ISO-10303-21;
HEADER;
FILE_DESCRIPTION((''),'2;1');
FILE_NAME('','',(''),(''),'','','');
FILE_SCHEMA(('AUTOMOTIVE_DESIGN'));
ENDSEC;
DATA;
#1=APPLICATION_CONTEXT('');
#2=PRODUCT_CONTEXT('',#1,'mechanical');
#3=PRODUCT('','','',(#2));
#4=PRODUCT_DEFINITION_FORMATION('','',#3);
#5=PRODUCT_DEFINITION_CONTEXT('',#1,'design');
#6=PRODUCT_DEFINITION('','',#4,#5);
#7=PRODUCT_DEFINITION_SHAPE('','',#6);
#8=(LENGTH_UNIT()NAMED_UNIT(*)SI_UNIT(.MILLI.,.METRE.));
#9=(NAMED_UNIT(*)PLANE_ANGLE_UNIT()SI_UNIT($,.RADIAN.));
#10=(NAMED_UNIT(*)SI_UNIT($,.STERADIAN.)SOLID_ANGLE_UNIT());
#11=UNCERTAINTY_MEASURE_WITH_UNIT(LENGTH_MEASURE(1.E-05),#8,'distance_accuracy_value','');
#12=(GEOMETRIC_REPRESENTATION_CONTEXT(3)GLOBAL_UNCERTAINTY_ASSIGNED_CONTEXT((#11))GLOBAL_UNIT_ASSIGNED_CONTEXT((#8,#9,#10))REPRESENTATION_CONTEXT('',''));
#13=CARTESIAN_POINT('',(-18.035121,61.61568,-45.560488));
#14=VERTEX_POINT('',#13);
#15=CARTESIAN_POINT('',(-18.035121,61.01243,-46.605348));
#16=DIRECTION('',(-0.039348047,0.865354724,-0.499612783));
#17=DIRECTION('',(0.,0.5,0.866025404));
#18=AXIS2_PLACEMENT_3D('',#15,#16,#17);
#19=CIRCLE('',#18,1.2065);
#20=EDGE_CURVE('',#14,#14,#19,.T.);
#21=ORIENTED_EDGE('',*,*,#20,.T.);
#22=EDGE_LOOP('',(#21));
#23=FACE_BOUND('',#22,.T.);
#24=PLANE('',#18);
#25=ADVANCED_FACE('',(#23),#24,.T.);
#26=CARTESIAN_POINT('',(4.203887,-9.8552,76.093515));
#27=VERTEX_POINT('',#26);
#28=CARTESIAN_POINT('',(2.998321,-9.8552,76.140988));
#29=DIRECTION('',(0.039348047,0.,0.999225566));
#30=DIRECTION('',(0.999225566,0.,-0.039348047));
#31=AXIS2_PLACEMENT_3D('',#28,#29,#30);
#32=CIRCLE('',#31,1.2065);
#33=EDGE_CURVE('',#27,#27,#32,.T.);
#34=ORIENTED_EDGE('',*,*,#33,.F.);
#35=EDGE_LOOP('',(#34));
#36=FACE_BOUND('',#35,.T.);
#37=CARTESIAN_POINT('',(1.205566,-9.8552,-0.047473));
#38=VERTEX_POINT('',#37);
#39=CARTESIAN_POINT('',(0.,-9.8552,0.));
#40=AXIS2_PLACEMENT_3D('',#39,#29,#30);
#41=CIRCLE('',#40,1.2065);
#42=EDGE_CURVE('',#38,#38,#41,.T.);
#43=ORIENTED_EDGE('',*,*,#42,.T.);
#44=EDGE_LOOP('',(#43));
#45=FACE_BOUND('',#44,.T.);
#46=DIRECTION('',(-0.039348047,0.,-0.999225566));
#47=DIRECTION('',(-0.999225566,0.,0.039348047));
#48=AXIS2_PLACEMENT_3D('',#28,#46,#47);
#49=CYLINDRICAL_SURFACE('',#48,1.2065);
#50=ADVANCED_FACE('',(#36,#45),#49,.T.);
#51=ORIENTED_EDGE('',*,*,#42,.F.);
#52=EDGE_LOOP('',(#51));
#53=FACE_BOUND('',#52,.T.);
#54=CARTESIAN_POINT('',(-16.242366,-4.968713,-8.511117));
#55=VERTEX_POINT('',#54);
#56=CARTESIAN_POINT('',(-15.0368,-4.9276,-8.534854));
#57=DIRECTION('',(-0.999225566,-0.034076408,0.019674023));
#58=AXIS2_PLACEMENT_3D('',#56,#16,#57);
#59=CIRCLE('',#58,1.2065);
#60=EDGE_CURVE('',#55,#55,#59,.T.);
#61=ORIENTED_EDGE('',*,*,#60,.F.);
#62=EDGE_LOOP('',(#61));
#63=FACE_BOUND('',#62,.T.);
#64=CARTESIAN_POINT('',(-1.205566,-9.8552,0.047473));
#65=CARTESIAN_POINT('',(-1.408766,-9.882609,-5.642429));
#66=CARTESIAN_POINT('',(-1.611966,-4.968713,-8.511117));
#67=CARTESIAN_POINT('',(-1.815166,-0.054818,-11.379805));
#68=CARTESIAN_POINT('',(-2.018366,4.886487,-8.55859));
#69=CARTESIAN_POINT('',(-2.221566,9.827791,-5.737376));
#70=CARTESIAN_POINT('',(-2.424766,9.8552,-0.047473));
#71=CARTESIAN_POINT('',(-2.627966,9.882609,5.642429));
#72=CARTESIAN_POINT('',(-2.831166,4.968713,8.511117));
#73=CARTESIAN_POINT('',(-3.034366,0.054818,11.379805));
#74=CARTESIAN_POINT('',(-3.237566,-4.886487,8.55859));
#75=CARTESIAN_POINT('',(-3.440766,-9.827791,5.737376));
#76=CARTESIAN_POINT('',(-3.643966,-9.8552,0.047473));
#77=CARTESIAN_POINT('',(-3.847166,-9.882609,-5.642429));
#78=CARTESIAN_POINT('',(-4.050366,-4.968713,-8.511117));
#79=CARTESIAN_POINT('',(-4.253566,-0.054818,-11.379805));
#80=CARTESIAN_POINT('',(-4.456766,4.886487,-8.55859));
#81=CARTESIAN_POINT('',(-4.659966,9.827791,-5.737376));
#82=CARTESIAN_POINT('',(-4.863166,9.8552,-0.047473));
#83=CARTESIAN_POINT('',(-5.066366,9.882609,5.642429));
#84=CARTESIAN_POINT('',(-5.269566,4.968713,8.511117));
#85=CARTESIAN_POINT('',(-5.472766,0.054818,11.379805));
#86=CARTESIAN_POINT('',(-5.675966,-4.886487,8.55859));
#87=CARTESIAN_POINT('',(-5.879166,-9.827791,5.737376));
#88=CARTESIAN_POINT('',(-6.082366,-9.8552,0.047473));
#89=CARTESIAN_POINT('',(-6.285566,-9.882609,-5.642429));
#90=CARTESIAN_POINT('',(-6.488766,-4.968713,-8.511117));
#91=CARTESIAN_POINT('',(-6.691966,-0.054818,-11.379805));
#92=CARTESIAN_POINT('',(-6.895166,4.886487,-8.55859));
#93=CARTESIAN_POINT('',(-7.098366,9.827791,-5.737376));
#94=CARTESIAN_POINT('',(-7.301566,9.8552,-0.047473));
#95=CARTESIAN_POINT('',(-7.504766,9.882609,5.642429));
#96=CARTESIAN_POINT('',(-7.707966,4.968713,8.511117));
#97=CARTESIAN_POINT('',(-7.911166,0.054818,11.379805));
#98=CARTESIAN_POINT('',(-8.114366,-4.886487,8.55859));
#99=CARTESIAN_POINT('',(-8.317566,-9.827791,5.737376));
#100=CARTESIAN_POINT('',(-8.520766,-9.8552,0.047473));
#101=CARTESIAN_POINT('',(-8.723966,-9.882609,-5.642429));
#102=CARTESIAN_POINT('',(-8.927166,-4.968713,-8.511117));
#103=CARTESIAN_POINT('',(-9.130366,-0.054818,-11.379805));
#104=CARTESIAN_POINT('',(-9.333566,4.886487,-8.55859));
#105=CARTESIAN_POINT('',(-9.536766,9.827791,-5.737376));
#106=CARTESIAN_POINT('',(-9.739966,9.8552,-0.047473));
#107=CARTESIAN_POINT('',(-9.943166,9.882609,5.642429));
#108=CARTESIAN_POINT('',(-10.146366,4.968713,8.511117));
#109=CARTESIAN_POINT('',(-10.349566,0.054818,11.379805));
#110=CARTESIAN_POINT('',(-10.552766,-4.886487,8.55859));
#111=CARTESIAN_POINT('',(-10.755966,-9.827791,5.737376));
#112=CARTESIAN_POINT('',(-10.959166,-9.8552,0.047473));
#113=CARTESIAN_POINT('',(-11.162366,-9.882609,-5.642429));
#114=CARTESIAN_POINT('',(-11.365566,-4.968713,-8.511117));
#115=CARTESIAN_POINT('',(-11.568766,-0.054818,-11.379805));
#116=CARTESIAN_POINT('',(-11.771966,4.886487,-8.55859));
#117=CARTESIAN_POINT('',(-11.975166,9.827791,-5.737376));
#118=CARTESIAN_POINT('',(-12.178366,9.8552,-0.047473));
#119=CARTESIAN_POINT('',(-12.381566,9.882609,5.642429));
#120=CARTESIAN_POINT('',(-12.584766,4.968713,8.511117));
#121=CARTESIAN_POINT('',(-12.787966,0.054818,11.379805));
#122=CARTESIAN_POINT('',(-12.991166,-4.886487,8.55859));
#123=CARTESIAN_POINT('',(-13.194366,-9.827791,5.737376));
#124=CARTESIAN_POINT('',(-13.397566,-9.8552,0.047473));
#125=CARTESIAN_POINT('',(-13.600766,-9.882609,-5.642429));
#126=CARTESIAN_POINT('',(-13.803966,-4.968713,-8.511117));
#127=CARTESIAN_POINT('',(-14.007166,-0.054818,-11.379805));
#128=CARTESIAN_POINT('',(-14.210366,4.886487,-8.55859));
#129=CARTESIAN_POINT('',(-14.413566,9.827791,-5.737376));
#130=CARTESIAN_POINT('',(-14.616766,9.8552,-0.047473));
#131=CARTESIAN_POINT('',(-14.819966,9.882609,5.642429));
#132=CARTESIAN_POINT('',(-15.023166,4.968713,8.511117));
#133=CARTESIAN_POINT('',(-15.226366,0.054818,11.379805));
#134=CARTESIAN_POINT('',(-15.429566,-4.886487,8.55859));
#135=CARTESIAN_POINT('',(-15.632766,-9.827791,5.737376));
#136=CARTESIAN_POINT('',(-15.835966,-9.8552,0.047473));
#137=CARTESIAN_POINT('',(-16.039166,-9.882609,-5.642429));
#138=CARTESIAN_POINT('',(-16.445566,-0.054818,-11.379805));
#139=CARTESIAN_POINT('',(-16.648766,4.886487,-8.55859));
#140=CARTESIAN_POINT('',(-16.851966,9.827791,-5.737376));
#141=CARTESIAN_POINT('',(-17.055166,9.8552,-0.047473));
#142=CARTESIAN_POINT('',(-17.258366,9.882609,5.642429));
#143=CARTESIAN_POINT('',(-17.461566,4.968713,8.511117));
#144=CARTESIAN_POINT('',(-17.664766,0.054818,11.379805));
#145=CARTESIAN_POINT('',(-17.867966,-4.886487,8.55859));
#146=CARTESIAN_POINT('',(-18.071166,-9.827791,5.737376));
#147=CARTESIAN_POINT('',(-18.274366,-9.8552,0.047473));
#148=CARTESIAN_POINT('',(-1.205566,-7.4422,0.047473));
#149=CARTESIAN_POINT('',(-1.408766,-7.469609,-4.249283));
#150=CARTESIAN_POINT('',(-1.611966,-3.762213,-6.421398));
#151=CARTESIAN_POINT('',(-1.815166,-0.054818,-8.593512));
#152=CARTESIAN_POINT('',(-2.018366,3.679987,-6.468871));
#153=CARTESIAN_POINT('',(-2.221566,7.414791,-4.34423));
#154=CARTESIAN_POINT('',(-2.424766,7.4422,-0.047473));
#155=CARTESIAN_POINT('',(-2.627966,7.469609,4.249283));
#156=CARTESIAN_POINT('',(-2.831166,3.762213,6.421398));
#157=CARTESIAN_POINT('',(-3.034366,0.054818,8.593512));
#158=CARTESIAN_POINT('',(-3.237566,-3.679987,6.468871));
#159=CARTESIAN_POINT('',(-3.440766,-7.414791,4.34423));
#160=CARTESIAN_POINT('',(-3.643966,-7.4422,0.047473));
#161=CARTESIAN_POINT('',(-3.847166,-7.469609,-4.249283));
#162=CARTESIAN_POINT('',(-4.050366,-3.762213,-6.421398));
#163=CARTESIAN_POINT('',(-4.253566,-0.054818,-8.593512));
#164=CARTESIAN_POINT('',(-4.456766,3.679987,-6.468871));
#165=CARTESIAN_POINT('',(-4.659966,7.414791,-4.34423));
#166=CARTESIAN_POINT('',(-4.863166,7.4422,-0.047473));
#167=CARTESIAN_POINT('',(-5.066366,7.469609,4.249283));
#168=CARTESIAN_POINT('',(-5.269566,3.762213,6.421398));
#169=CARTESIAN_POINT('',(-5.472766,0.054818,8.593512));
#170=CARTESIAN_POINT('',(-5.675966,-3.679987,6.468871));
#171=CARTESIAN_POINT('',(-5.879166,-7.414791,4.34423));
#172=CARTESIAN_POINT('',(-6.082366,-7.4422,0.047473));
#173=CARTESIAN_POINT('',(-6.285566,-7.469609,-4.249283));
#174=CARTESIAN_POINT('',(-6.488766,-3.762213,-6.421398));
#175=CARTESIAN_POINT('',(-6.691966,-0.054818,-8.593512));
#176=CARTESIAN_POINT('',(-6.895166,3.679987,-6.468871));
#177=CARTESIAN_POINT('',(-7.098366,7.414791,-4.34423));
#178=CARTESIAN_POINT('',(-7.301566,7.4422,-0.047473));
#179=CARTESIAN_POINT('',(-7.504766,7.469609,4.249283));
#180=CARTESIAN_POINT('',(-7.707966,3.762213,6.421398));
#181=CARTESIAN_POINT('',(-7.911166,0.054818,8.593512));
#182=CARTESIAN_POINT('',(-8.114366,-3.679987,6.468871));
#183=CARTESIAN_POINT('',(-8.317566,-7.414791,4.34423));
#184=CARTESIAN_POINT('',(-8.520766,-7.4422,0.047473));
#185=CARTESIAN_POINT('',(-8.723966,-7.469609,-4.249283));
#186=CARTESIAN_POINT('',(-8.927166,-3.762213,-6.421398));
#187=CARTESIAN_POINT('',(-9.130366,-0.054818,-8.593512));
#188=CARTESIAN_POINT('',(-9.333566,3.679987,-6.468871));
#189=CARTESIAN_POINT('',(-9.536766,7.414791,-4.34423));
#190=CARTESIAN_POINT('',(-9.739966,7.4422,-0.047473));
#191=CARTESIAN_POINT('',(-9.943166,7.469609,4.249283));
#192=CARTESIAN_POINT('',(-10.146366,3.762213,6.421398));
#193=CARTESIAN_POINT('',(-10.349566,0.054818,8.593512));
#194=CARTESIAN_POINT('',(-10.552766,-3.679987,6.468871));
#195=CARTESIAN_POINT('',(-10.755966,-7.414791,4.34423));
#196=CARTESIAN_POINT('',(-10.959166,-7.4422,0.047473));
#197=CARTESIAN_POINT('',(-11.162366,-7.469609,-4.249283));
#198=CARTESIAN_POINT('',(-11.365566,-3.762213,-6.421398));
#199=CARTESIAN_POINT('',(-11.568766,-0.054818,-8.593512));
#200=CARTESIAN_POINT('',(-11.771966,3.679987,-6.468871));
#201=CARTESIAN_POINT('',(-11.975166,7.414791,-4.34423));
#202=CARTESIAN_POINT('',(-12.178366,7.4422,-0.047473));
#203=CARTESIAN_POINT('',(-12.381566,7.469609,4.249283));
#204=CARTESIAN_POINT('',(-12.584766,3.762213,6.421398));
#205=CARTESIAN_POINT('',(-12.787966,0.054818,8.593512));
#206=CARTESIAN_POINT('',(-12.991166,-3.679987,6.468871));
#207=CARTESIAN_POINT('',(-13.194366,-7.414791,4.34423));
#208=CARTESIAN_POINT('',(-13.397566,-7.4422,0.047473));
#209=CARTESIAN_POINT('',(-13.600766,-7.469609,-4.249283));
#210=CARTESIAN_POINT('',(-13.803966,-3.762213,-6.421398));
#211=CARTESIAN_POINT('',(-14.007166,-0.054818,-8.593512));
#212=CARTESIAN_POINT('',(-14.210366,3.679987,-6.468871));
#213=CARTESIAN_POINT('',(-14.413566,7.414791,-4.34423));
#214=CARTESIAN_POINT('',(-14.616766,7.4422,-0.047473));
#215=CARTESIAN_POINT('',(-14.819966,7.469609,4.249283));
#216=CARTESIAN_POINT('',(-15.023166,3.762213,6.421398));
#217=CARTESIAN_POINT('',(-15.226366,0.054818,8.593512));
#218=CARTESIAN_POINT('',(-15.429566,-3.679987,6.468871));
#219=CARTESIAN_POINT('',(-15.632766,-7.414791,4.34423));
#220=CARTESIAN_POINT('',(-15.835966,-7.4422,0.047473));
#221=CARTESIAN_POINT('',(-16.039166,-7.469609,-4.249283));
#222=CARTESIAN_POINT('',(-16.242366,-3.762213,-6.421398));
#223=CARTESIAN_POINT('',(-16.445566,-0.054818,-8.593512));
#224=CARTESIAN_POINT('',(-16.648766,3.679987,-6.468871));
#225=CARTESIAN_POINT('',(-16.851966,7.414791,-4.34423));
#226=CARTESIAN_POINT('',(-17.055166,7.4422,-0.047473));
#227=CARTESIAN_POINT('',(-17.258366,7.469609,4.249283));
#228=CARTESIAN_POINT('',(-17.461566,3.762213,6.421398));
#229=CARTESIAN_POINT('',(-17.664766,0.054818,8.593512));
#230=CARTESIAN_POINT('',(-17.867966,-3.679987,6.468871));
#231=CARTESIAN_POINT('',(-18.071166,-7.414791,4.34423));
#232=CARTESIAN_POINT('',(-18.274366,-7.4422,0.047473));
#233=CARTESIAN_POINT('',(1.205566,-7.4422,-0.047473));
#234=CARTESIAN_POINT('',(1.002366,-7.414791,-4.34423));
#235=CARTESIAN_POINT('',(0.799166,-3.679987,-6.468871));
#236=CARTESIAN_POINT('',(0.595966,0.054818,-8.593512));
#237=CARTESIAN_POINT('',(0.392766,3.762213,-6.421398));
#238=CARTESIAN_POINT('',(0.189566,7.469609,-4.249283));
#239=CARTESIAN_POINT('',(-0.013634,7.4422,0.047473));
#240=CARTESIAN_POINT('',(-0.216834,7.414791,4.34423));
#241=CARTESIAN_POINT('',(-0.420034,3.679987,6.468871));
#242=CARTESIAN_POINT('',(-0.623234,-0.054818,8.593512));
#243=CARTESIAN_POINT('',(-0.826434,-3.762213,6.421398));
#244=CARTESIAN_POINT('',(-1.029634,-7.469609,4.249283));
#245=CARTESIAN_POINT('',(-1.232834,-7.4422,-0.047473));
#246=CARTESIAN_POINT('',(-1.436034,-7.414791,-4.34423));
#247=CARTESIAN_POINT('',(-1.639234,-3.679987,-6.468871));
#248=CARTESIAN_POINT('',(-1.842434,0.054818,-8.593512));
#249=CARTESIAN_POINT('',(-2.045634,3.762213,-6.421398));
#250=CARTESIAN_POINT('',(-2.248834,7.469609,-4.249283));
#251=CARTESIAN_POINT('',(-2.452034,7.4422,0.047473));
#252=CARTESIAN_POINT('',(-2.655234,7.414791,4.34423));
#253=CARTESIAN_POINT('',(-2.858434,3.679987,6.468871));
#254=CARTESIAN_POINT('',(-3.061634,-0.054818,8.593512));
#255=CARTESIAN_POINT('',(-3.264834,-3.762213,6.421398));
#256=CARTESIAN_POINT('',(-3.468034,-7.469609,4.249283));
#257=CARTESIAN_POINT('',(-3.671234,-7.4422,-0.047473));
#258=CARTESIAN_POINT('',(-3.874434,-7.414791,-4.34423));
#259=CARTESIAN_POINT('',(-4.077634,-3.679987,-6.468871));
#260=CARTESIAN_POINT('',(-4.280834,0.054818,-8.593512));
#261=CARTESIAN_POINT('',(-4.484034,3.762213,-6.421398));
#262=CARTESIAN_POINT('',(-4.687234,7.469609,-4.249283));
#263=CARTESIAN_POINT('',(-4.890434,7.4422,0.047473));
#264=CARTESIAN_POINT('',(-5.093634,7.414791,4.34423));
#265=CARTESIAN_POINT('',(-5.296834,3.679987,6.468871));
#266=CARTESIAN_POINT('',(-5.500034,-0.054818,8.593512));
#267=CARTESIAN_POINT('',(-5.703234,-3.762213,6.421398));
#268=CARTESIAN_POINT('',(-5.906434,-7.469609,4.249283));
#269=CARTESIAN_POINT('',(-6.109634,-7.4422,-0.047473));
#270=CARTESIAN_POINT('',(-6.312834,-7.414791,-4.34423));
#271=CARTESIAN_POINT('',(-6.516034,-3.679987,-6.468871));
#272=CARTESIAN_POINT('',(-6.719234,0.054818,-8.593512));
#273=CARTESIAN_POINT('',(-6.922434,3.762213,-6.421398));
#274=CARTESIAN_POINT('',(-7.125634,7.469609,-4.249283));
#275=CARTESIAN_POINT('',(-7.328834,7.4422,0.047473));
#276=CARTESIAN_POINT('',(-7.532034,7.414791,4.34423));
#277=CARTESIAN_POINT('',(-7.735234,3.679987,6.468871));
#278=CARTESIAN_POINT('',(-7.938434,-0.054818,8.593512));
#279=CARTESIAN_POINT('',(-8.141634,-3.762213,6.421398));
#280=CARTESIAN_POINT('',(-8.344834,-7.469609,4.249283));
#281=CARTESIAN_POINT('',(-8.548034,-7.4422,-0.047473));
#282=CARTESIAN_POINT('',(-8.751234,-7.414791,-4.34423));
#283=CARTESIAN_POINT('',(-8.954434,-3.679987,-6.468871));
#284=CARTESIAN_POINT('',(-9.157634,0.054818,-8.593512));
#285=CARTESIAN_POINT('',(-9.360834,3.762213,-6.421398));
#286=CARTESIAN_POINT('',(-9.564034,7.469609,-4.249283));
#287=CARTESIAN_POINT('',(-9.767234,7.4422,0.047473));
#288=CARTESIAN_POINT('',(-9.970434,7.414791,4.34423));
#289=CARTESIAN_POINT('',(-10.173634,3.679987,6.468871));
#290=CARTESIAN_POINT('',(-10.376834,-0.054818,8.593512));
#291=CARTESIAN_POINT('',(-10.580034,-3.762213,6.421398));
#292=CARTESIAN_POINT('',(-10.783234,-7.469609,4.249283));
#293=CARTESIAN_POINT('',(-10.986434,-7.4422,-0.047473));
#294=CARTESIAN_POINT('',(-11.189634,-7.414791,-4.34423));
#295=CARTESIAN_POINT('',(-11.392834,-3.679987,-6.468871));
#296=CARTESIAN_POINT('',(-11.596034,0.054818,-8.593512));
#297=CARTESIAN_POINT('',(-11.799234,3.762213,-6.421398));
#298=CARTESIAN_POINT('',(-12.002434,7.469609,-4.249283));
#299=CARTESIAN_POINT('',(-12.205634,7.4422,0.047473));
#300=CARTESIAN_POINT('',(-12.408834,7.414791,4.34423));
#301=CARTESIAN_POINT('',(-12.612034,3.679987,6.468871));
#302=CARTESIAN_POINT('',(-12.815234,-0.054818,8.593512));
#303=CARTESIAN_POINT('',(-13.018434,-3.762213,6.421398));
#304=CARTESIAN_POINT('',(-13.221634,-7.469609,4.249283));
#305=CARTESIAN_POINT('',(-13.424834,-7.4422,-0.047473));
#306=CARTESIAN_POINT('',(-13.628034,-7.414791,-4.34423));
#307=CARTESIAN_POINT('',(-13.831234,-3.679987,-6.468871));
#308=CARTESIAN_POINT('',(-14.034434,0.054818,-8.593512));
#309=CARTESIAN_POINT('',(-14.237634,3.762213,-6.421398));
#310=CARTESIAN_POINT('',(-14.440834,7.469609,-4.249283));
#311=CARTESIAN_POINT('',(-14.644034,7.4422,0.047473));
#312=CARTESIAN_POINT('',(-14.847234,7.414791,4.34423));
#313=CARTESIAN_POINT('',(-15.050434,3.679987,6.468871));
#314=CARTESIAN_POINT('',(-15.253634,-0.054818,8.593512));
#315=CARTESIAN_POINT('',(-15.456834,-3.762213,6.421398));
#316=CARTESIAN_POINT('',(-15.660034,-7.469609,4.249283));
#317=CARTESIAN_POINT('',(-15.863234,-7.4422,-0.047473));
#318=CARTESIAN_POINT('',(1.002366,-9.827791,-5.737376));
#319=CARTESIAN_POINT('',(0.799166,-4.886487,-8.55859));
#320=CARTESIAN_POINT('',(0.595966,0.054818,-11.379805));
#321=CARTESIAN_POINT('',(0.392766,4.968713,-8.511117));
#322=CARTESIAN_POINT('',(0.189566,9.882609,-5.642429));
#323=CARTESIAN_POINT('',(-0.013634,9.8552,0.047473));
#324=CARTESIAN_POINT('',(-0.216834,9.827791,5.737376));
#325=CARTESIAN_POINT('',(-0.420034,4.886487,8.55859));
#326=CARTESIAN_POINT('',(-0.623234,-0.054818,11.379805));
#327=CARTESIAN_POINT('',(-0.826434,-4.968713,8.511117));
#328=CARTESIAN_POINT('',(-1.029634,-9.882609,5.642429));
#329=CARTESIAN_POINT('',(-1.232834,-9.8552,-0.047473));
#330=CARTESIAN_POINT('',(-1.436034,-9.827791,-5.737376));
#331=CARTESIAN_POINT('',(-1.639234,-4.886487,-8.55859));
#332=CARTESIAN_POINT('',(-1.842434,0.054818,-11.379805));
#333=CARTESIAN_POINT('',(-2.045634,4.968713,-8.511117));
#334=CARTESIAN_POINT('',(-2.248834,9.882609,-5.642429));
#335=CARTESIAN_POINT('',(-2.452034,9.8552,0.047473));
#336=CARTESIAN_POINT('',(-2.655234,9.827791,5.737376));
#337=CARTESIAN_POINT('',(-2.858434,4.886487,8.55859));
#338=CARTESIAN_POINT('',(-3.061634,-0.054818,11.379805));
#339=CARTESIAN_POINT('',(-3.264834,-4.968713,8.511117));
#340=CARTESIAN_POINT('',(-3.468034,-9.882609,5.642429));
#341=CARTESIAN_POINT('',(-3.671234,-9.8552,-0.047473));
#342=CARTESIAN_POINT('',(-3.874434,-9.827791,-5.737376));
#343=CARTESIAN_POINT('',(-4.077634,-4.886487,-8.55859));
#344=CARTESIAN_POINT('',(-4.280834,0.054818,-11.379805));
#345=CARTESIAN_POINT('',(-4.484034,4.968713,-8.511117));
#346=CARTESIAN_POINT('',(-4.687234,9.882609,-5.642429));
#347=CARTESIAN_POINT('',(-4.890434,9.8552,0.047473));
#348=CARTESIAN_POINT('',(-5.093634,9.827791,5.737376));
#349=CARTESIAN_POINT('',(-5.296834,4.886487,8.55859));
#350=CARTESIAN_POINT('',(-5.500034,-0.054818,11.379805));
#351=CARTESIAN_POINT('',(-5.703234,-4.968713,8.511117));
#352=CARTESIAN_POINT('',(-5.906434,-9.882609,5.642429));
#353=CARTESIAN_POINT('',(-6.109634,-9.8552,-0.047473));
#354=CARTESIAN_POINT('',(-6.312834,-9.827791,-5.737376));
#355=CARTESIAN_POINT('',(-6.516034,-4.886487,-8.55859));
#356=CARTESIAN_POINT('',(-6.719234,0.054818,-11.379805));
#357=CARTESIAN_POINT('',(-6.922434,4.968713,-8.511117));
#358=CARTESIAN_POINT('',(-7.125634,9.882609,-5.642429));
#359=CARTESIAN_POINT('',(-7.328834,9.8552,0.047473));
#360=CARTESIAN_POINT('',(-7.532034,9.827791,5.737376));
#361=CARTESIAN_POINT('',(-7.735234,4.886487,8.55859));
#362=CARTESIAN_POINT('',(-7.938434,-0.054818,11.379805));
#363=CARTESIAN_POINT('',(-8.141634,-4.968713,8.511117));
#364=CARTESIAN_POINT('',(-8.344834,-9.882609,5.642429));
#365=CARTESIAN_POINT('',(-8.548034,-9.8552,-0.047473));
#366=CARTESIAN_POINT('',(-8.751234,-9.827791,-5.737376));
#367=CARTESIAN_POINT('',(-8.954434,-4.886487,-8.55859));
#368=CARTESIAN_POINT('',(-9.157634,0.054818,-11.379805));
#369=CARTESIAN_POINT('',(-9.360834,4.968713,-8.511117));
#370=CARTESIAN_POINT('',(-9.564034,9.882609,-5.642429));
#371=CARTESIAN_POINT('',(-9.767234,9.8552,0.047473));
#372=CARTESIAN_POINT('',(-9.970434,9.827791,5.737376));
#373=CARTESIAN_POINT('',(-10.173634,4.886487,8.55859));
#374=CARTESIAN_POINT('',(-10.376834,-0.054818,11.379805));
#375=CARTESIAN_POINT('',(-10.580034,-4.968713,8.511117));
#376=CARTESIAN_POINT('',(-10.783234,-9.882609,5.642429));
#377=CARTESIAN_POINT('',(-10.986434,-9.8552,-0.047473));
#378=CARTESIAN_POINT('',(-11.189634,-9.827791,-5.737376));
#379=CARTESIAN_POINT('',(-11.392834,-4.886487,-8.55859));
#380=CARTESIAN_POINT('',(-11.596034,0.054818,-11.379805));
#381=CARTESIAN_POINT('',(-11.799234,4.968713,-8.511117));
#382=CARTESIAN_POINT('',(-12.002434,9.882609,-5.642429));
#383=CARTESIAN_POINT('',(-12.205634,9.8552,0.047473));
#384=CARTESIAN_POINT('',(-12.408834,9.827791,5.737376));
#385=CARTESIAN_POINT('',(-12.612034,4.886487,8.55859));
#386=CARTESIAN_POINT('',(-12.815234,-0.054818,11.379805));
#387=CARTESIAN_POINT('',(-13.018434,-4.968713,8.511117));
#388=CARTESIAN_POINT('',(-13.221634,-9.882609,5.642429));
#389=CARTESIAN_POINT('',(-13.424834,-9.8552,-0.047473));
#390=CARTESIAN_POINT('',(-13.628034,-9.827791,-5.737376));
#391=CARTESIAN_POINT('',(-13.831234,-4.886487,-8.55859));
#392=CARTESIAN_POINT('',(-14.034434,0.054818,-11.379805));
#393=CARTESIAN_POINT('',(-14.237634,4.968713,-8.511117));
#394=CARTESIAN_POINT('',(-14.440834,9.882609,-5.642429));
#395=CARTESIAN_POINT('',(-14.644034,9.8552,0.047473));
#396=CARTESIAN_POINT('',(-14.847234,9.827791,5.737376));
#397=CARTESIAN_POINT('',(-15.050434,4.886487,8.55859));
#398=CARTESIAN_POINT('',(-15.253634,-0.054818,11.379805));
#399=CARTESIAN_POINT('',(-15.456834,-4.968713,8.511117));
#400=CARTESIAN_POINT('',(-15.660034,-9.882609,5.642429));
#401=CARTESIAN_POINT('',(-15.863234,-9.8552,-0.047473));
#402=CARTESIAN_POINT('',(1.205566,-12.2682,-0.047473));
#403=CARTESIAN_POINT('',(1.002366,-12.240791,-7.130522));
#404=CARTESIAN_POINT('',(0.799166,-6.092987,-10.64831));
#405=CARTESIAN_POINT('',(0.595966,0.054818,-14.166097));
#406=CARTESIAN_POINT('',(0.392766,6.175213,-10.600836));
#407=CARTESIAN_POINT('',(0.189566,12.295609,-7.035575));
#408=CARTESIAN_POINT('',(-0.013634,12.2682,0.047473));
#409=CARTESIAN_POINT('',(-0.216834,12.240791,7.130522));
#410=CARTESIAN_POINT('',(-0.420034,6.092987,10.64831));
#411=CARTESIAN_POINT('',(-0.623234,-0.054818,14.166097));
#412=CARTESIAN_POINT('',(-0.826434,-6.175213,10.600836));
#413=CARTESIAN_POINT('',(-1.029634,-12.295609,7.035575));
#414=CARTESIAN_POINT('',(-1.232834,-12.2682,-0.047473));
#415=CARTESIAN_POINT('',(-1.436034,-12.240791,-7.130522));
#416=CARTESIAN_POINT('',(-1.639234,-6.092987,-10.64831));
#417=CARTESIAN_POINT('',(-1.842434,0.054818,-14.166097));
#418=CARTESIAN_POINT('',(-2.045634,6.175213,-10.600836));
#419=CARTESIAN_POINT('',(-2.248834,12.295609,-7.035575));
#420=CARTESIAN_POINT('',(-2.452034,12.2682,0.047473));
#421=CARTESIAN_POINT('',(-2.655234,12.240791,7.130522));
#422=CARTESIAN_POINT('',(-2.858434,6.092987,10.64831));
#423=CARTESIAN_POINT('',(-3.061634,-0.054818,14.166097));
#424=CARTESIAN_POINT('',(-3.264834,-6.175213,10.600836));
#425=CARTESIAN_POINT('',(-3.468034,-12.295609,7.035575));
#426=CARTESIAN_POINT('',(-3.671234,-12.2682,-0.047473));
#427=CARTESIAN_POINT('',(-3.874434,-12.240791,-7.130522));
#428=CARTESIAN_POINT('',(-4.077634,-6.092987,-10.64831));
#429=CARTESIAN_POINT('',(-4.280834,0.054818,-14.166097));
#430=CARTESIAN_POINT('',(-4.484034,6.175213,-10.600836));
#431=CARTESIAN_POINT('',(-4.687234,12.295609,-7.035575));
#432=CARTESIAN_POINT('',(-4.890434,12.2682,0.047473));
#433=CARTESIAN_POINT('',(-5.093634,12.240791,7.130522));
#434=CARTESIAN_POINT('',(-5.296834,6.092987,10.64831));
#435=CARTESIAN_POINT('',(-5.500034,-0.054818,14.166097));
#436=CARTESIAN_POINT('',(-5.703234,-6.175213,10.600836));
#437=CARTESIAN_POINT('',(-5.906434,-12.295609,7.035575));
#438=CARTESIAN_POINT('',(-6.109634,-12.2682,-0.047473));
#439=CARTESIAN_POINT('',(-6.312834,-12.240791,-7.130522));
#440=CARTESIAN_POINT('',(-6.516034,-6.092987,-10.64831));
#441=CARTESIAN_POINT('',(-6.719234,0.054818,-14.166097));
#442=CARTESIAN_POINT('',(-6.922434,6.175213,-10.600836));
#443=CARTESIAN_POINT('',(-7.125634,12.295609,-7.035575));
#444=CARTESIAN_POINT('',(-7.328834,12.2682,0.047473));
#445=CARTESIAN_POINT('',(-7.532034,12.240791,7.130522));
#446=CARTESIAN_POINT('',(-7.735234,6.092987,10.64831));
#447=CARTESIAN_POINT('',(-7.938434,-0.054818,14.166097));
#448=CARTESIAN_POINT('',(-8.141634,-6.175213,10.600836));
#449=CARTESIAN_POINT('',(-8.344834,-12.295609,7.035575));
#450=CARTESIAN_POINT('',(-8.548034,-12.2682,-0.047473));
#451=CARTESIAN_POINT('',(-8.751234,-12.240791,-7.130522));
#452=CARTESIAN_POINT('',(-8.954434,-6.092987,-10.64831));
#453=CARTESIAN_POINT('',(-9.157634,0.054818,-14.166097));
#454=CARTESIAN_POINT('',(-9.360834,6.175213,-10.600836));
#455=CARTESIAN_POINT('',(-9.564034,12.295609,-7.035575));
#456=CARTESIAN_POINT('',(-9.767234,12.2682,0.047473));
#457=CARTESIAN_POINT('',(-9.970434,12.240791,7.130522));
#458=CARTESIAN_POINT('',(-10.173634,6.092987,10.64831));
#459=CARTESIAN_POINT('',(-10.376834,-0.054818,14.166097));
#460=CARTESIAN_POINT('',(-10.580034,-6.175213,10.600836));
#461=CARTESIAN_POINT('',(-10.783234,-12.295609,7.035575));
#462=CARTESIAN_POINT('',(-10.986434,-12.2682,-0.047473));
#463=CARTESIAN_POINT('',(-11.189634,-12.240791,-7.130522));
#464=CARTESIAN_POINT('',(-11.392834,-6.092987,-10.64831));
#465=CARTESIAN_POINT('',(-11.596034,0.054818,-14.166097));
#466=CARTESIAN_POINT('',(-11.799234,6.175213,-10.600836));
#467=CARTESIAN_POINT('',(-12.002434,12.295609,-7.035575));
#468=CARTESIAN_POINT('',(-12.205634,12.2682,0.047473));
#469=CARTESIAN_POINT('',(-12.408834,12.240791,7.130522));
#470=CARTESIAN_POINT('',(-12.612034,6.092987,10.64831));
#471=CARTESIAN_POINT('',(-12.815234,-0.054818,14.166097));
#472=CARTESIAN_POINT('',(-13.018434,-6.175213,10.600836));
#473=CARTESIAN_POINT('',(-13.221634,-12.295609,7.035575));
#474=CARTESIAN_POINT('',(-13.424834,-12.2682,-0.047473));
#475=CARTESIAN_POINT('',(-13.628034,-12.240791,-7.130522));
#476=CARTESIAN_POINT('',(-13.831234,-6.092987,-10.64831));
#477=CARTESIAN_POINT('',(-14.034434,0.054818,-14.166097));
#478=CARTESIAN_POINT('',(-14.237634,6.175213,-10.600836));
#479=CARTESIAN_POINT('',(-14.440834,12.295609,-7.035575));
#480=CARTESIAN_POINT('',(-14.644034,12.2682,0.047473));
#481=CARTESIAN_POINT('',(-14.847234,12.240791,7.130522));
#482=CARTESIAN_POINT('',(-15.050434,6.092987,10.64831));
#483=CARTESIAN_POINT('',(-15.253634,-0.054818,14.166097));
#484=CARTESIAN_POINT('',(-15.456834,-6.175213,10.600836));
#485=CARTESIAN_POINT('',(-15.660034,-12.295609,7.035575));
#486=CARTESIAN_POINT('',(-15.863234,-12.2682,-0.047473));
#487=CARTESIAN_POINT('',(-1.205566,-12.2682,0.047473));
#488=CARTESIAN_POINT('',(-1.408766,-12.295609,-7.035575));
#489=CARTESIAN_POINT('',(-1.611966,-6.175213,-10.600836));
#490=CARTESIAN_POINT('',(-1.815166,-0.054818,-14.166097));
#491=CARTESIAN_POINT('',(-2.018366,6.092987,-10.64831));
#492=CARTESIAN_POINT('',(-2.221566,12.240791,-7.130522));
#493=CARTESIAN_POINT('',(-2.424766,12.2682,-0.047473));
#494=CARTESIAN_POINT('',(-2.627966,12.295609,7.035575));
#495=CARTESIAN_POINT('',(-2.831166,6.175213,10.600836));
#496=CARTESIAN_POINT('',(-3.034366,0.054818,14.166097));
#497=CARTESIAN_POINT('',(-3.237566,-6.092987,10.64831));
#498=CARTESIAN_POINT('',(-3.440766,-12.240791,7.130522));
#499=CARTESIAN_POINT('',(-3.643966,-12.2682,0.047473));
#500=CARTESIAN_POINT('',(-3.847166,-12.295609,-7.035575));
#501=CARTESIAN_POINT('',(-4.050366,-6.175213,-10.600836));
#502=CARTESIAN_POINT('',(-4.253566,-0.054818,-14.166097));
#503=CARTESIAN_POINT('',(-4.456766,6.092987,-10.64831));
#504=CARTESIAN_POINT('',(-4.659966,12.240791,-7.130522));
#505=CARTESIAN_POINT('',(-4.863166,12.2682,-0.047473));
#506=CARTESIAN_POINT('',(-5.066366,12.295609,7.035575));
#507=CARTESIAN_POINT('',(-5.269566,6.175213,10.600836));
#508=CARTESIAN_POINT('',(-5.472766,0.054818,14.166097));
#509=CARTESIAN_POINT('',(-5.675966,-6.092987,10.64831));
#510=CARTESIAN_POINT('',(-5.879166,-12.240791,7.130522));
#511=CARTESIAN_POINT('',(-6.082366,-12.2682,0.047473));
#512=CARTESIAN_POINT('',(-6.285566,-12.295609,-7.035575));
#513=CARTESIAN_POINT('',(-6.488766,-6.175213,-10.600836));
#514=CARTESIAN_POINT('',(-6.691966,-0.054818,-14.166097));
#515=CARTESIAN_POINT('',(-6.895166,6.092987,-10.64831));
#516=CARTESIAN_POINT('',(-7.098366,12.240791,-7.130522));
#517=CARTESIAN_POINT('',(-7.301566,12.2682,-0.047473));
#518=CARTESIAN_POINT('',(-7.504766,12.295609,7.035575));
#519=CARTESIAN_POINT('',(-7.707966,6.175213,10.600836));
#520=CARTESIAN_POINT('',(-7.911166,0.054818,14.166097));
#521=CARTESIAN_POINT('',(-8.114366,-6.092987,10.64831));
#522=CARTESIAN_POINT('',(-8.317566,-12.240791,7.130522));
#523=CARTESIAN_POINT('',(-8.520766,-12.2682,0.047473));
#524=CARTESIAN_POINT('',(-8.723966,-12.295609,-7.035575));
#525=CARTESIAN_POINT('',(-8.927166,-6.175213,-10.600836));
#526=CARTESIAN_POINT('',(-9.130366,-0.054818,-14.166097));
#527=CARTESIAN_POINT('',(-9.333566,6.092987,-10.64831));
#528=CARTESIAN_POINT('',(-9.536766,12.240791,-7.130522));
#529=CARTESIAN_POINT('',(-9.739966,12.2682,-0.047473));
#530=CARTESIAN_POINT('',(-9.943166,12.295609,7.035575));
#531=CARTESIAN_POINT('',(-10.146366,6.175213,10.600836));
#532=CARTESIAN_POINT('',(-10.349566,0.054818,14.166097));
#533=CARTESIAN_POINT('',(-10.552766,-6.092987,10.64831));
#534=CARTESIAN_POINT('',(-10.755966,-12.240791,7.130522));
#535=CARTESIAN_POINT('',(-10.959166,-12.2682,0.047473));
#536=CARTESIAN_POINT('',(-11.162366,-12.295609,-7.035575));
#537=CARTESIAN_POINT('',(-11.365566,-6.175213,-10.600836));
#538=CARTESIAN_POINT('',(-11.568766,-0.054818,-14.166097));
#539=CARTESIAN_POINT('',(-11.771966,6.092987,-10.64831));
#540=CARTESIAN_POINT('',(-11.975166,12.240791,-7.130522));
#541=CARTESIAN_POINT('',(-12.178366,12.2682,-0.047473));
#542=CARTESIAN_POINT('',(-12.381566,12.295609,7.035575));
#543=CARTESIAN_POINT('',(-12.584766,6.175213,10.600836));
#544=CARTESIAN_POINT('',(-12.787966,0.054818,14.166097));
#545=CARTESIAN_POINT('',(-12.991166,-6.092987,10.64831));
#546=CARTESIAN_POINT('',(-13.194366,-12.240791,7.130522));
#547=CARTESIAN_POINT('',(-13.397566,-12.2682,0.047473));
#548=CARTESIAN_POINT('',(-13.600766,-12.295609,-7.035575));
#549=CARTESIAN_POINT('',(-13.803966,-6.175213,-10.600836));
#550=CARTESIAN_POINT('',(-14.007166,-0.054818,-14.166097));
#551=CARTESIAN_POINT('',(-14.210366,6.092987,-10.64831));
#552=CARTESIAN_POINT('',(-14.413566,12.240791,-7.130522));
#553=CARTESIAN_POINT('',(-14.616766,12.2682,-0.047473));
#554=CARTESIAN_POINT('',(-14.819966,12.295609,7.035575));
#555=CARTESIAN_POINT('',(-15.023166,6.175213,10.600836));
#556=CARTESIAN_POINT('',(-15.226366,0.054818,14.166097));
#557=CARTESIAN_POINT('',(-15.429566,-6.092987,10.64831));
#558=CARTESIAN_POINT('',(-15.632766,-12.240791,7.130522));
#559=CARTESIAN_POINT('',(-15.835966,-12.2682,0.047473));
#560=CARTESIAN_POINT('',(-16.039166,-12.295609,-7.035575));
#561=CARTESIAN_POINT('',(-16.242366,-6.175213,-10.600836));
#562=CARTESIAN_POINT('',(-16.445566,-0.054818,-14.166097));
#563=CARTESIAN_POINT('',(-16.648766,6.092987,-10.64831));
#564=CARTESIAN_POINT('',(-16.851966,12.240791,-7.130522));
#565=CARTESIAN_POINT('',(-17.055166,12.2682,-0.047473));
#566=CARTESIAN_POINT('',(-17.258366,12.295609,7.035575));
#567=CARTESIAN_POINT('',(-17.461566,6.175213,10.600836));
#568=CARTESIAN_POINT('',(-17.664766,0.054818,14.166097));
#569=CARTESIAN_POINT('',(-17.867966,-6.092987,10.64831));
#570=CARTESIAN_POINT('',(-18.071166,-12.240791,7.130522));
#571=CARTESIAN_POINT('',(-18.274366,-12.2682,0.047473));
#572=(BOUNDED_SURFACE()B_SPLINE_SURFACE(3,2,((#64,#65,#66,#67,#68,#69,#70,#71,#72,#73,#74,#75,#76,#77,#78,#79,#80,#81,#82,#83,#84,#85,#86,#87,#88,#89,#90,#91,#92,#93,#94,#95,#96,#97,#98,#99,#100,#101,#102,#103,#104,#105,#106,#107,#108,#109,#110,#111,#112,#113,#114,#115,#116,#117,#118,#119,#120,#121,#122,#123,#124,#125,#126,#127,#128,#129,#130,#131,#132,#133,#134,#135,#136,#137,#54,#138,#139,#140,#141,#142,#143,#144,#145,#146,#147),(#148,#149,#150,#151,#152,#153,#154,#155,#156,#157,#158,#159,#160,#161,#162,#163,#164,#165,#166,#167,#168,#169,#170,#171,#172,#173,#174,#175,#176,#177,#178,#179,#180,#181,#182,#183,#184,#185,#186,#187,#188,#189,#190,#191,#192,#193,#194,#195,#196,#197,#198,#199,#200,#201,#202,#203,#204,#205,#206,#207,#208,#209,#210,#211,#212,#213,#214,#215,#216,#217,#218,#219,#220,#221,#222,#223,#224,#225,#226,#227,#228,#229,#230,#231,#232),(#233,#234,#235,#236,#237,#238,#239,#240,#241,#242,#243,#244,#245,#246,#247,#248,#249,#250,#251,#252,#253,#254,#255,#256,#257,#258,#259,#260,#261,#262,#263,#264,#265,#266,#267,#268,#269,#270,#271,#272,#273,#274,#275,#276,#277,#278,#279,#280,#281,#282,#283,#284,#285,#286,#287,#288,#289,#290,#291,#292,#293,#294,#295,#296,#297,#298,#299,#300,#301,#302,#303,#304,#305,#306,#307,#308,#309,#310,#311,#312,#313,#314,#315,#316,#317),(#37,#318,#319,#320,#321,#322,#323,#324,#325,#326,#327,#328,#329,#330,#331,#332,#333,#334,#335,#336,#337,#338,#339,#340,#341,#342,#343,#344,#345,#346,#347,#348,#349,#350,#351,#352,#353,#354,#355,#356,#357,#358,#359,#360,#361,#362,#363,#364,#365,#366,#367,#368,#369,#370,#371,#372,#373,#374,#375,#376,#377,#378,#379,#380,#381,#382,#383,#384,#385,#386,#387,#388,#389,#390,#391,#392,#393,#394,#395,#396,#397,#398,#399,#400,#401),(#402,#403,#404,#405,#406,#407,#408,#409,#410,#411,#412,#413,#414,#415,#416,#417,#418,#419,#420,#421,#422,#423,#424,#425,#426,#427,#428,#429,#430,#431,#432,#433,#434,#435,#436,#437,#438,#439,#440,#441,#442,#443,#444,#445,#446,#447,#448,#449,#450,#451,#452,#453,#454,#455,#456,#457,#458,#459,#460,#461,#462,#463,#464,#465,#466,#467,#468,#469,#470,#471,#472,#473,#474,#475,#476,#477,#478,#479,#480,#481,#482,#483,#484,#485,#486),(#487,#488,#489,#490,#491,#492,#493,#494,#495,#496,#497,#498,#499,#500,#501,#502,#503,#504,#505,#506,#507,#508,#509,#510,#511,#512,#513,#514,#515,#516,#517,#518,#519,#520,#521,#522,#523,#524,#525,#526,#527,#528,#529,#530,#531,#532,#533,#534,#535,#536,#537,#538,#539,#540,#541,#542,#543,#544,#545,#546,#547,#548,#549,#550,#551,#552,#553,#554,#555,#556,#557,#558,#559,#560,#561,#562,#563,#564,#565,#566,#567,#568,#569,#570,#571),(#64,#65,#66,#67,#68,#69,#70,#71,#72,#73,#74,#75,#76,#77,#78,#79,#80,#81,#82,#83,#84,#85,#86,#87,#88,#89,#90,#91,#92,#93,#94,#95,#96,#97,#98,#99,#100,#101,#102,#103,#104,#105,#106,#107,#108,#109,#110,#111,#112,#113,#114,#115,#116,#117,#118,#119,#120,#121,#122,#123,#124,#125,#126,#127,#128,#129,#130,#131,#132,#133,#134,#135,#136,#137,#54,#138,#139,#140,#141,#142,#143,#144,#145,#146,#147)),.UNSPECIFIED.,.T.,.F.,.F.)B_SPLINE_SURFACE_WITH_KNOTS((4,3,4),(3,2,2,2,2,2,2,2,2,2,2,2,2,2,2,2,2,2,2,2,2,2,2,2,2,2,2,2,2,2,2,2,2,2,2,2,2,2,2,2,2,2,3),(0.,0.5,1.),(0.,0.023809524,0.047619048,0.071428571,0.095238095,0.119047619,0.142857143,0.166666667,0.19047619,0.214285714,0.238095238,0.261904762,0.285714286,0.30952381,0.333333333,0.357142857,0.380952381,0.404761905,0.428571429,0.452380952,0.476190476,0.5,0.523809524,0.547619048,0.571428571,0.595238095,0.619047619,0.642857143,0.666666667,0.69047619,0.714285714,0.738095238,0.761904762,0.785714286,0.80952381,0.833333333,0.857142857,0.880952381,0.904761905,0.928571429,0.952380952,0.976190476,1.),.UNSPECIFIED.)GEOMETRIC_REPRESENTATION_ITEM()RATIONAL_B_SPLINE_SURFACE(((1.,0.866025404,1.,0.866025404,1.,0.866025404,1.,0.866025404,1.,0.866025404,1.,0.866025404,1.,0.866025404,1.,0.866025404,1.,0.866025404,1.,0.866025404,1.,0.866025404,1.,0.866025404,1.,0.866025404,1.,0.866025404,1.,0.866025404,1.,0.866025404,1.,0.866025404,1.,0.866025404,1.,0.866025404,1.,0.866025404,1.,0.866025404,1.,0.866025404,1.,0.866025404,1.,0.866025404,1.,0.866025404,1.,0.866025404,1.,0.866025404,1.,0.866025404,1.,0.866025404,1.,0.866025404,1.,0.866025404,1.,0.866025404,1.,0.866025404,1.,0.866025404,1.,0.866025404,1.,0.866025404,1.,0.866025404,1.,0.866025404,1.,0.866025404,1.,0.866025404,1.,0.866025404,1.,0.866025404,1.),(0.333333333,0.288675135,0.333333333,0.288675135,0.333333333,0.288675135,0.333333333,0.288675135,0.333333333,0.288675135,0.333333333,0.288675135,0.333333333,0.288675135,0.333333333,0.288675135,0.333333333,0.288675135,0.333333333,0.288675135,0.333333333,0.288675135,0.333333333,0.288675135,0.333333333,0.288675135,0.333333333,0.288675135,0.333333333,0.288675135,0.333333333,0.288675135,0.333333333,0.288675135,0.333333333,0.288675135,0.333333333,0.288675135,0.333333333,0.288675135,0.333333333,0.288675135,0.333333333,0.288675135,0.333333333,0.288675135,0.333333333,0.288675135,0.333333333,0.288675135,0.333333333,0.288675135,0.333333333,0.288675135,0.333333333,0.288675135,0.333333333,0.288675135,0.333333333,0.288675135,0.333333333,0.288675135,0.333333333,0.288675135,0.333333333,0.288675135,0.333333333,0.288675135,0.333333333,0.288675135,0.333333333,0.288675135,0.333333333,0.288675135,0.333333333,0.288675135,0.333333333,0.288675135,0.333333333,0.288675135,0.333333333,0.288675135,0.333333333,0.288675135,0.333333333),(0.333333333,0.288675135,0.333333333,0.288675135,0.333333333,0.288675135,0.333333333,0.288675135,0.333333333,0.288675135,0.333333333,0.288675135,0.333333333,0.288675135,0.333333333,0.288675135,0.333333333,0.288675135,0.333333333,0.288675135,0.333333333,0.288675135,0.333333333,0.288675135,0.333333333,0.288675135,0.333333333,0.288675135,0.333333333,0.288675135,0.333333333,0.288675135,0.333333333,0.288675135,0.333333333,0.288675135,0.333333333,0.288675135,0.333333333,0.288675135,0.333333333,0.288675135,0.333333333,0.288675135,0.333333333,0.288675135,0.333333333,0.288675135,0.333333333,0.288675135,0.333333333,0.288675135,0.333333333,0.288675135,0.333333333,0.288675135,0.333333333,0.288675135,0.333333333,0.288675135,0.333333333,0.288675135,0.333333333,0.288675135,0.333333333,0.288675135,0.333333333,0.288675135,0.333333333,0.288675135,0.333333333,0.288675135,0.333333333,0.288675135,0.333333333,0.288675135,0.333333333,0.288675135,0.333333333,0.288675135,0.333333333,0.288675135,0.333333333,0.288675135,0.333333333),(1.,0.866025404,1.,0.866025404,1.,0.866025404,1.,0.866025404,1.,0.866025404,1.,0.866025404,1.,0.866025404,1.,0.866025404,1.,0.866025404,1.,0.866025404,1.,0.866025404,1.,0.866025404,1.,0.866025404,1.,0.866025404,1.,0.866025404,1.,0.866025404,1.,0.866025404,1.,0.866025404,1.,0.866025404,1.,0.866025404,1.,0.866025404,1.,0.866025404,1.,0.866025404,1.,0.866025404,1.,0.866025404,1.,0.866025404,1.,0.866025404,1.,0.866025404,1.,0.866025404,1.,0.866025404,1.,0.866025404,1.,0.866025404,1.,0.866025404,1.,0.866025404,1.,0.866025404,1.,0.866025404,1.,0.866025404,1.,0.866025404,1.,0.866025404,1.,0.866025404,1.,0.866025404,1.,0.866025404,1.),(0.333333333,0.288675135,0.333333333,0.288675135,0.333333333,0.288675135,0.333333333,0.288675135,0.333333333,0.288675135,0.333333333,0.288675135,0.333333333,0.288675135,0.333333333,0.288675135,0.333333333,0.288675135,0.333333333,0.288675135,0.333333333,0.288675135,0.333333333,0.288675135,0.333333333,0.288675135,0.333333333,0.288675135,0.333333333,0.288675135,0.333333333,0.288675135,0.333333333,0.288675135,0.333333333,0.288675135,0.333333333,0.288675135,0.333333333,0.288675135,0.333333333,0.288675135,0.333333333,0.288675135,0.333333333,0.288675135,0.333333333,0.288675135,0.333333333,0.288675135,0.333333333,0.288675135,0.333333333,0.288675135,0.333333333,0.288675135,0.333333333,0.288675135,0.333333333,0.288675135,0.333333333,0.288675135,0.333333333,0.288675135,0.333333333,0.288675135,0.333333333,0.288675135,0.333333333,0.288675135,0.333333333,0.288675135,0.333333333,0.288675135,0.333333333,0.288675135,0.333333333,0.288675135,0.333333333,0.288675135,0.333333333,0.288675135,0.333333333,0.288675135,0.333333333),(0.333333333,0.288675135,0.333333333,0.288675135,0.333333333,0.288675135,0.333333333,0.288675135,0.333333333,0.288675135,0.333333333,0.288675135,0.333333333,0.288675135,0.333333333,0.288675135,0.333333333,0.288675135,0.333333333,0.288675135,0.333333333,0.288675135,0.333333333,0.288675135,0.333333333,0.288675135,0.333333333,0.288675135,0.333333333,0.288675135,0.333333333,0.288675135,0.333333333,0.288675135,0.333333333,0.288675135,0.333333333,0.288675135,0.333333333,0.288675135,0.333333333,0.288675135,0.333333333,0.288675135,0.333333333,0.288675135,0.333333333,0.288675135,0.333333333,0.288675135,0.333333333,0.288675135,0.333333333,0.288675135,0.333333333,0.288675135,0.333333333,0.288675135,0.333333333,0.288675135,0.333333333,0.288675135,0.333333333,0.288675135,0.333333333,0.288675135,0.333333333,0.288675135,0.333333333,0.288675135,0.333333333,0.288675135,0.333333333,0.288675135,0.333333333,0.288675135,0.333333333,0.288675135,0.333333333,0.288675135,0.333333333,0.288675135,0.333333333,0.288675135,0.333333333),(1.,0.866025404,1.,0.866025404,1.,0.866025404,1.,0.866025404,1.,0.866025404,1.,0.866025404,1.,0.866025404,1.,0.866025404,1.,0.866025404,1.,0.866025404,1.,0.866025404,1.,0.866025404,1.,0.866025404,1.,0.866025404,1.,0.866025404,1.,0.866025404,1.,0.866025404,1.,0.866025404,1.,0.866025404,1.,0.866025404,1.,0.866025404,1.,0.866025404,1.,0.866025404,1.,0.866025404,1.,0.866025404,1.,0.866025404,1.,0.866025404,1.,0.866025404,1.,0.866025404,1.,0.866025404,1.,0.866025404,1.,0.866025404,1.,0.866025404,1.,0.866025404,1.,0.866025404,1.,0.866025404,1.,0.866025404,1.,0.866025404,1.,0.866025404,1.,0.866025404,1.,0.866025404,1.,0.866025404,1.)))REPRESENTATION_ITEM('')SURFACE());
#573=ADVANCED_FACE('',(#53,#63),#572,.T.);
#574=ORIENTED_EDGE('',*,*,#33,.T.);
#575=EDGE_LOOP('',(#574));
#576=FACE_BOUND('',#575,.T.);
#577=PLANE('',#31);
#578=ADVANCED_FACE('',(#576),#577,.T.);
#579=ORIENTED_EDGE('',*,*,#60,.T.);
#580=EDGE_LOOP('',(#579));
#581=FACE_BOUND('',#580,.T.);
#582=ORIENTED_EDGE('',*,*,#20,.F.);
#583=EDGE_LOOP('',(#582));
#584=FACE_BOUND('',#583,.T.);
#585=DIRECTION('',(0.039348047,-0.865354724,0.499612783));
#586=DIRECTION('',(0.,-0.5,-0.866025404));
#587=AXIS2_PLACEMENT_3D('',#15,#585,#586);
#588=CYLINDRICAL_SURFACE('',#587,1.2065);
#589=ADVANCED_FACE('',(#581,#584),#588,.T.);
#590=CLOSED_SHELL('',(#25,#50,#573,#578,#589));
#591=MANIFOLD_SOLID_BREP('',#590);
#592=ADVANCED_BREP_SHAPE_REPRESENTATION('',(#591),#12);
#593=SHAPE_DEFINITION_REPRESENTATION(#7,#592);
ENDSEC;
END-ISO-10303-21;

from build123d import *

# Parameters (mm, degrees)
SWEEP1_PITCH   = 2.4384
SKETCH4_R      = 1.2065
EXTRUDE1_DEPTH = 76.2
SKETCH5_R      = 1.2065
EXTRUDE2_DEPTH = 76.2


with BuildPart() as part:
    # Sweep1: the profile of Sketch3 screwed along a left-hand helix of 6.166667 turns, 6 arcs to a turn; built about Z, then put on its axis
    sweep1_z = Axis((0, 0, 0), (0, 0, 1))
    sweep1_corners = [(9.88323439, -0.047460601, -1.205240148), (11.061374251, 0.001103098, 0.028012679), (9.82716561, 0.047460601, 1.205240148), (8.649025749, -0.001103098, -0.028012679)]
    with BuildLine(mode=Mode.PRIVATE) as sweep1_profile:
        ThreePointArc((9.88323439, -0.047460601, -1.205240148), (10.727917299, -0.032779704, -0.832425526), (11.061374251, 0.001103098, 0.028012679))
        ThreePointArc((11.061374251, 0.001103098, 0.028012679), (10.688270685, 0.034339721, 0.872041437), (9.82716561, 0.047460601, 1.205240148))
        ThreePointArc((9.82716561, 0.047460601, 1.205240148), (8.982482701, 0.032779704, 0.832425526), (8.649025749, -0.001103098, -0.028012679))
        ThreePointArc((8.649025749, -0.001103098, -0.028012679), (9.022129315, -0.034339721, -0.872041437), (9.88323439, -0.047460601, -1.205240148))
    sweep1_cap = Face(sweep1_profile.wire())
    sweep1_arcs = [((9.88323439, -0.047460601, -1.205240148), (11.08940864, -0.046357502, -1.177227469), (11.061374251, 0.001103098, 0.028012679), (1, 0.7071067811865476, 1)), ((11.061374251, 0.001103098, 0.028012679), (11.033339861, 0.048563699, 1.233252827), (9.82716561, 0.047460601, 1.205240148), (1, 0.7071067811865476, 1)), ((9.82716561, 0.047460601, 1.205240148), (8.62099136, 0.046357502, 1.177227469), (8.649025749, -0.001103098, -0.028012679), (1, 0.7071067811865476, 1)), ((8.649025749, -0.001103098, -0.028012679), (8.677060139, -0.048563699, -1.233252827), (9.88323439, -0.047460601, -1.205240148), (1, 0.7071067811865476, 1))]  # start, shoulder, end, weights
    sweep1_turn_angles = [0, -30, -60, -90, -120, -150, -180, -210, -240, -270, -300, -330, -360]
    sweep1_turn_weights = [1, 0.8660254037844387, 1, 0.8660254037844387, 1, 0.8660254037844387, 1, 0.8660254037844387, 1, 0.8660254037844387, 1, 0.8660254037844387, 1]
    sweep1_turn_sides = [Face.make_bezier_surface([[Vector(p[j][0], p[j][1], 0).rotate(sweep1_z, sweep1_turn_angles[2 * i + k]) / sweep1_turn_weights[2 * i + k] + Vector(0, 0, p[j][2] + -SWEEP1_PITCH * sweep1_turn_angles[2 * i + k] / 360) for k in range(3)] for j in range(3)], [[p[3][j] * sweep1_turn_weights[2 * i + k] for k in range(3)] for j in range(3)]) for p in sweep1_arcs for i in range(6)]
    sweep1_last_angles = [-2160, -2190, -2220]
    sweep1_last_weights = [1, 0.866025403784403, 1]
    sweep1_last_sides = [Face.make_bezier_surface([[Vector(p[j][0], p[j][1], 0).rotate(sweep1_z, sweep1_last_angles[2 * i + k]) / sweep1_last_weights[2 * i + k] + Vector(0, 0, p[j][2] + -SWEEP1_PITCH * sweep1_last_angles[2 * i + k] / 360) for k in range(3)] for j in range(3)], [[p[3][j] * sweep1_last_weights[2 * i + k] for k in range(3)] for j in range(3)]) for p in sweep1_arcs for i in range(1)]
    sweep1 = Plane(origin=(0, 0, 0), x_dir=(0, -1, 0), z_dir=(-1, 0, 0)) * Solid(Shell([*[p.moved(Location((0, 0, SWEEP1_PITCH * i))) for i in range(6) for p in sweep1_turn_sides], *sweep1_last_sides, sweep1_cap, sweep1_cap.rotate(sweep1_z, -2220).moved(Location((0, 0, -SWEEP1_PITCH * -2220 / 360)))]))
    add(sweep1)

    # Sketch4 → Extrude1 (add)
    with BuildSketch(Plane(origin=(0, 0, 0), x_dir=(-0.9989557795402644, 0.023236129092747825, 0.03933742274079621), z_dir=(0.03934804652827866, -1.0745961412372829e-14, 0.9992255657429951))):
        with Locations(Location((-0.228996699, 9.852539142, 0), (0, 0, 181.33145196))):
            Circle(SKETCH4_R)
    extrude(amount=EXTRUDE1_DEPTH)

    # Sketch5 → Extrude2 (add)
    with BuildSketch(Plane(origin=(-0.023281008, 0.51200331, -0.295605249), x_dir=(0.9992255652040811, 0.03409282936814917, -0.019645580374703375), z_dir=(-0.03934804652827868, 0.8653547240443686, -0.4996127828713984))):
        with Locations(Location((-15.025478653, 9.854706523, 0), (0, 0, 180.001881766))):
            Circle(SKETCH5_R)
    extrude(amount=EXTRUDE2_DEPTH)


solid = part.part
